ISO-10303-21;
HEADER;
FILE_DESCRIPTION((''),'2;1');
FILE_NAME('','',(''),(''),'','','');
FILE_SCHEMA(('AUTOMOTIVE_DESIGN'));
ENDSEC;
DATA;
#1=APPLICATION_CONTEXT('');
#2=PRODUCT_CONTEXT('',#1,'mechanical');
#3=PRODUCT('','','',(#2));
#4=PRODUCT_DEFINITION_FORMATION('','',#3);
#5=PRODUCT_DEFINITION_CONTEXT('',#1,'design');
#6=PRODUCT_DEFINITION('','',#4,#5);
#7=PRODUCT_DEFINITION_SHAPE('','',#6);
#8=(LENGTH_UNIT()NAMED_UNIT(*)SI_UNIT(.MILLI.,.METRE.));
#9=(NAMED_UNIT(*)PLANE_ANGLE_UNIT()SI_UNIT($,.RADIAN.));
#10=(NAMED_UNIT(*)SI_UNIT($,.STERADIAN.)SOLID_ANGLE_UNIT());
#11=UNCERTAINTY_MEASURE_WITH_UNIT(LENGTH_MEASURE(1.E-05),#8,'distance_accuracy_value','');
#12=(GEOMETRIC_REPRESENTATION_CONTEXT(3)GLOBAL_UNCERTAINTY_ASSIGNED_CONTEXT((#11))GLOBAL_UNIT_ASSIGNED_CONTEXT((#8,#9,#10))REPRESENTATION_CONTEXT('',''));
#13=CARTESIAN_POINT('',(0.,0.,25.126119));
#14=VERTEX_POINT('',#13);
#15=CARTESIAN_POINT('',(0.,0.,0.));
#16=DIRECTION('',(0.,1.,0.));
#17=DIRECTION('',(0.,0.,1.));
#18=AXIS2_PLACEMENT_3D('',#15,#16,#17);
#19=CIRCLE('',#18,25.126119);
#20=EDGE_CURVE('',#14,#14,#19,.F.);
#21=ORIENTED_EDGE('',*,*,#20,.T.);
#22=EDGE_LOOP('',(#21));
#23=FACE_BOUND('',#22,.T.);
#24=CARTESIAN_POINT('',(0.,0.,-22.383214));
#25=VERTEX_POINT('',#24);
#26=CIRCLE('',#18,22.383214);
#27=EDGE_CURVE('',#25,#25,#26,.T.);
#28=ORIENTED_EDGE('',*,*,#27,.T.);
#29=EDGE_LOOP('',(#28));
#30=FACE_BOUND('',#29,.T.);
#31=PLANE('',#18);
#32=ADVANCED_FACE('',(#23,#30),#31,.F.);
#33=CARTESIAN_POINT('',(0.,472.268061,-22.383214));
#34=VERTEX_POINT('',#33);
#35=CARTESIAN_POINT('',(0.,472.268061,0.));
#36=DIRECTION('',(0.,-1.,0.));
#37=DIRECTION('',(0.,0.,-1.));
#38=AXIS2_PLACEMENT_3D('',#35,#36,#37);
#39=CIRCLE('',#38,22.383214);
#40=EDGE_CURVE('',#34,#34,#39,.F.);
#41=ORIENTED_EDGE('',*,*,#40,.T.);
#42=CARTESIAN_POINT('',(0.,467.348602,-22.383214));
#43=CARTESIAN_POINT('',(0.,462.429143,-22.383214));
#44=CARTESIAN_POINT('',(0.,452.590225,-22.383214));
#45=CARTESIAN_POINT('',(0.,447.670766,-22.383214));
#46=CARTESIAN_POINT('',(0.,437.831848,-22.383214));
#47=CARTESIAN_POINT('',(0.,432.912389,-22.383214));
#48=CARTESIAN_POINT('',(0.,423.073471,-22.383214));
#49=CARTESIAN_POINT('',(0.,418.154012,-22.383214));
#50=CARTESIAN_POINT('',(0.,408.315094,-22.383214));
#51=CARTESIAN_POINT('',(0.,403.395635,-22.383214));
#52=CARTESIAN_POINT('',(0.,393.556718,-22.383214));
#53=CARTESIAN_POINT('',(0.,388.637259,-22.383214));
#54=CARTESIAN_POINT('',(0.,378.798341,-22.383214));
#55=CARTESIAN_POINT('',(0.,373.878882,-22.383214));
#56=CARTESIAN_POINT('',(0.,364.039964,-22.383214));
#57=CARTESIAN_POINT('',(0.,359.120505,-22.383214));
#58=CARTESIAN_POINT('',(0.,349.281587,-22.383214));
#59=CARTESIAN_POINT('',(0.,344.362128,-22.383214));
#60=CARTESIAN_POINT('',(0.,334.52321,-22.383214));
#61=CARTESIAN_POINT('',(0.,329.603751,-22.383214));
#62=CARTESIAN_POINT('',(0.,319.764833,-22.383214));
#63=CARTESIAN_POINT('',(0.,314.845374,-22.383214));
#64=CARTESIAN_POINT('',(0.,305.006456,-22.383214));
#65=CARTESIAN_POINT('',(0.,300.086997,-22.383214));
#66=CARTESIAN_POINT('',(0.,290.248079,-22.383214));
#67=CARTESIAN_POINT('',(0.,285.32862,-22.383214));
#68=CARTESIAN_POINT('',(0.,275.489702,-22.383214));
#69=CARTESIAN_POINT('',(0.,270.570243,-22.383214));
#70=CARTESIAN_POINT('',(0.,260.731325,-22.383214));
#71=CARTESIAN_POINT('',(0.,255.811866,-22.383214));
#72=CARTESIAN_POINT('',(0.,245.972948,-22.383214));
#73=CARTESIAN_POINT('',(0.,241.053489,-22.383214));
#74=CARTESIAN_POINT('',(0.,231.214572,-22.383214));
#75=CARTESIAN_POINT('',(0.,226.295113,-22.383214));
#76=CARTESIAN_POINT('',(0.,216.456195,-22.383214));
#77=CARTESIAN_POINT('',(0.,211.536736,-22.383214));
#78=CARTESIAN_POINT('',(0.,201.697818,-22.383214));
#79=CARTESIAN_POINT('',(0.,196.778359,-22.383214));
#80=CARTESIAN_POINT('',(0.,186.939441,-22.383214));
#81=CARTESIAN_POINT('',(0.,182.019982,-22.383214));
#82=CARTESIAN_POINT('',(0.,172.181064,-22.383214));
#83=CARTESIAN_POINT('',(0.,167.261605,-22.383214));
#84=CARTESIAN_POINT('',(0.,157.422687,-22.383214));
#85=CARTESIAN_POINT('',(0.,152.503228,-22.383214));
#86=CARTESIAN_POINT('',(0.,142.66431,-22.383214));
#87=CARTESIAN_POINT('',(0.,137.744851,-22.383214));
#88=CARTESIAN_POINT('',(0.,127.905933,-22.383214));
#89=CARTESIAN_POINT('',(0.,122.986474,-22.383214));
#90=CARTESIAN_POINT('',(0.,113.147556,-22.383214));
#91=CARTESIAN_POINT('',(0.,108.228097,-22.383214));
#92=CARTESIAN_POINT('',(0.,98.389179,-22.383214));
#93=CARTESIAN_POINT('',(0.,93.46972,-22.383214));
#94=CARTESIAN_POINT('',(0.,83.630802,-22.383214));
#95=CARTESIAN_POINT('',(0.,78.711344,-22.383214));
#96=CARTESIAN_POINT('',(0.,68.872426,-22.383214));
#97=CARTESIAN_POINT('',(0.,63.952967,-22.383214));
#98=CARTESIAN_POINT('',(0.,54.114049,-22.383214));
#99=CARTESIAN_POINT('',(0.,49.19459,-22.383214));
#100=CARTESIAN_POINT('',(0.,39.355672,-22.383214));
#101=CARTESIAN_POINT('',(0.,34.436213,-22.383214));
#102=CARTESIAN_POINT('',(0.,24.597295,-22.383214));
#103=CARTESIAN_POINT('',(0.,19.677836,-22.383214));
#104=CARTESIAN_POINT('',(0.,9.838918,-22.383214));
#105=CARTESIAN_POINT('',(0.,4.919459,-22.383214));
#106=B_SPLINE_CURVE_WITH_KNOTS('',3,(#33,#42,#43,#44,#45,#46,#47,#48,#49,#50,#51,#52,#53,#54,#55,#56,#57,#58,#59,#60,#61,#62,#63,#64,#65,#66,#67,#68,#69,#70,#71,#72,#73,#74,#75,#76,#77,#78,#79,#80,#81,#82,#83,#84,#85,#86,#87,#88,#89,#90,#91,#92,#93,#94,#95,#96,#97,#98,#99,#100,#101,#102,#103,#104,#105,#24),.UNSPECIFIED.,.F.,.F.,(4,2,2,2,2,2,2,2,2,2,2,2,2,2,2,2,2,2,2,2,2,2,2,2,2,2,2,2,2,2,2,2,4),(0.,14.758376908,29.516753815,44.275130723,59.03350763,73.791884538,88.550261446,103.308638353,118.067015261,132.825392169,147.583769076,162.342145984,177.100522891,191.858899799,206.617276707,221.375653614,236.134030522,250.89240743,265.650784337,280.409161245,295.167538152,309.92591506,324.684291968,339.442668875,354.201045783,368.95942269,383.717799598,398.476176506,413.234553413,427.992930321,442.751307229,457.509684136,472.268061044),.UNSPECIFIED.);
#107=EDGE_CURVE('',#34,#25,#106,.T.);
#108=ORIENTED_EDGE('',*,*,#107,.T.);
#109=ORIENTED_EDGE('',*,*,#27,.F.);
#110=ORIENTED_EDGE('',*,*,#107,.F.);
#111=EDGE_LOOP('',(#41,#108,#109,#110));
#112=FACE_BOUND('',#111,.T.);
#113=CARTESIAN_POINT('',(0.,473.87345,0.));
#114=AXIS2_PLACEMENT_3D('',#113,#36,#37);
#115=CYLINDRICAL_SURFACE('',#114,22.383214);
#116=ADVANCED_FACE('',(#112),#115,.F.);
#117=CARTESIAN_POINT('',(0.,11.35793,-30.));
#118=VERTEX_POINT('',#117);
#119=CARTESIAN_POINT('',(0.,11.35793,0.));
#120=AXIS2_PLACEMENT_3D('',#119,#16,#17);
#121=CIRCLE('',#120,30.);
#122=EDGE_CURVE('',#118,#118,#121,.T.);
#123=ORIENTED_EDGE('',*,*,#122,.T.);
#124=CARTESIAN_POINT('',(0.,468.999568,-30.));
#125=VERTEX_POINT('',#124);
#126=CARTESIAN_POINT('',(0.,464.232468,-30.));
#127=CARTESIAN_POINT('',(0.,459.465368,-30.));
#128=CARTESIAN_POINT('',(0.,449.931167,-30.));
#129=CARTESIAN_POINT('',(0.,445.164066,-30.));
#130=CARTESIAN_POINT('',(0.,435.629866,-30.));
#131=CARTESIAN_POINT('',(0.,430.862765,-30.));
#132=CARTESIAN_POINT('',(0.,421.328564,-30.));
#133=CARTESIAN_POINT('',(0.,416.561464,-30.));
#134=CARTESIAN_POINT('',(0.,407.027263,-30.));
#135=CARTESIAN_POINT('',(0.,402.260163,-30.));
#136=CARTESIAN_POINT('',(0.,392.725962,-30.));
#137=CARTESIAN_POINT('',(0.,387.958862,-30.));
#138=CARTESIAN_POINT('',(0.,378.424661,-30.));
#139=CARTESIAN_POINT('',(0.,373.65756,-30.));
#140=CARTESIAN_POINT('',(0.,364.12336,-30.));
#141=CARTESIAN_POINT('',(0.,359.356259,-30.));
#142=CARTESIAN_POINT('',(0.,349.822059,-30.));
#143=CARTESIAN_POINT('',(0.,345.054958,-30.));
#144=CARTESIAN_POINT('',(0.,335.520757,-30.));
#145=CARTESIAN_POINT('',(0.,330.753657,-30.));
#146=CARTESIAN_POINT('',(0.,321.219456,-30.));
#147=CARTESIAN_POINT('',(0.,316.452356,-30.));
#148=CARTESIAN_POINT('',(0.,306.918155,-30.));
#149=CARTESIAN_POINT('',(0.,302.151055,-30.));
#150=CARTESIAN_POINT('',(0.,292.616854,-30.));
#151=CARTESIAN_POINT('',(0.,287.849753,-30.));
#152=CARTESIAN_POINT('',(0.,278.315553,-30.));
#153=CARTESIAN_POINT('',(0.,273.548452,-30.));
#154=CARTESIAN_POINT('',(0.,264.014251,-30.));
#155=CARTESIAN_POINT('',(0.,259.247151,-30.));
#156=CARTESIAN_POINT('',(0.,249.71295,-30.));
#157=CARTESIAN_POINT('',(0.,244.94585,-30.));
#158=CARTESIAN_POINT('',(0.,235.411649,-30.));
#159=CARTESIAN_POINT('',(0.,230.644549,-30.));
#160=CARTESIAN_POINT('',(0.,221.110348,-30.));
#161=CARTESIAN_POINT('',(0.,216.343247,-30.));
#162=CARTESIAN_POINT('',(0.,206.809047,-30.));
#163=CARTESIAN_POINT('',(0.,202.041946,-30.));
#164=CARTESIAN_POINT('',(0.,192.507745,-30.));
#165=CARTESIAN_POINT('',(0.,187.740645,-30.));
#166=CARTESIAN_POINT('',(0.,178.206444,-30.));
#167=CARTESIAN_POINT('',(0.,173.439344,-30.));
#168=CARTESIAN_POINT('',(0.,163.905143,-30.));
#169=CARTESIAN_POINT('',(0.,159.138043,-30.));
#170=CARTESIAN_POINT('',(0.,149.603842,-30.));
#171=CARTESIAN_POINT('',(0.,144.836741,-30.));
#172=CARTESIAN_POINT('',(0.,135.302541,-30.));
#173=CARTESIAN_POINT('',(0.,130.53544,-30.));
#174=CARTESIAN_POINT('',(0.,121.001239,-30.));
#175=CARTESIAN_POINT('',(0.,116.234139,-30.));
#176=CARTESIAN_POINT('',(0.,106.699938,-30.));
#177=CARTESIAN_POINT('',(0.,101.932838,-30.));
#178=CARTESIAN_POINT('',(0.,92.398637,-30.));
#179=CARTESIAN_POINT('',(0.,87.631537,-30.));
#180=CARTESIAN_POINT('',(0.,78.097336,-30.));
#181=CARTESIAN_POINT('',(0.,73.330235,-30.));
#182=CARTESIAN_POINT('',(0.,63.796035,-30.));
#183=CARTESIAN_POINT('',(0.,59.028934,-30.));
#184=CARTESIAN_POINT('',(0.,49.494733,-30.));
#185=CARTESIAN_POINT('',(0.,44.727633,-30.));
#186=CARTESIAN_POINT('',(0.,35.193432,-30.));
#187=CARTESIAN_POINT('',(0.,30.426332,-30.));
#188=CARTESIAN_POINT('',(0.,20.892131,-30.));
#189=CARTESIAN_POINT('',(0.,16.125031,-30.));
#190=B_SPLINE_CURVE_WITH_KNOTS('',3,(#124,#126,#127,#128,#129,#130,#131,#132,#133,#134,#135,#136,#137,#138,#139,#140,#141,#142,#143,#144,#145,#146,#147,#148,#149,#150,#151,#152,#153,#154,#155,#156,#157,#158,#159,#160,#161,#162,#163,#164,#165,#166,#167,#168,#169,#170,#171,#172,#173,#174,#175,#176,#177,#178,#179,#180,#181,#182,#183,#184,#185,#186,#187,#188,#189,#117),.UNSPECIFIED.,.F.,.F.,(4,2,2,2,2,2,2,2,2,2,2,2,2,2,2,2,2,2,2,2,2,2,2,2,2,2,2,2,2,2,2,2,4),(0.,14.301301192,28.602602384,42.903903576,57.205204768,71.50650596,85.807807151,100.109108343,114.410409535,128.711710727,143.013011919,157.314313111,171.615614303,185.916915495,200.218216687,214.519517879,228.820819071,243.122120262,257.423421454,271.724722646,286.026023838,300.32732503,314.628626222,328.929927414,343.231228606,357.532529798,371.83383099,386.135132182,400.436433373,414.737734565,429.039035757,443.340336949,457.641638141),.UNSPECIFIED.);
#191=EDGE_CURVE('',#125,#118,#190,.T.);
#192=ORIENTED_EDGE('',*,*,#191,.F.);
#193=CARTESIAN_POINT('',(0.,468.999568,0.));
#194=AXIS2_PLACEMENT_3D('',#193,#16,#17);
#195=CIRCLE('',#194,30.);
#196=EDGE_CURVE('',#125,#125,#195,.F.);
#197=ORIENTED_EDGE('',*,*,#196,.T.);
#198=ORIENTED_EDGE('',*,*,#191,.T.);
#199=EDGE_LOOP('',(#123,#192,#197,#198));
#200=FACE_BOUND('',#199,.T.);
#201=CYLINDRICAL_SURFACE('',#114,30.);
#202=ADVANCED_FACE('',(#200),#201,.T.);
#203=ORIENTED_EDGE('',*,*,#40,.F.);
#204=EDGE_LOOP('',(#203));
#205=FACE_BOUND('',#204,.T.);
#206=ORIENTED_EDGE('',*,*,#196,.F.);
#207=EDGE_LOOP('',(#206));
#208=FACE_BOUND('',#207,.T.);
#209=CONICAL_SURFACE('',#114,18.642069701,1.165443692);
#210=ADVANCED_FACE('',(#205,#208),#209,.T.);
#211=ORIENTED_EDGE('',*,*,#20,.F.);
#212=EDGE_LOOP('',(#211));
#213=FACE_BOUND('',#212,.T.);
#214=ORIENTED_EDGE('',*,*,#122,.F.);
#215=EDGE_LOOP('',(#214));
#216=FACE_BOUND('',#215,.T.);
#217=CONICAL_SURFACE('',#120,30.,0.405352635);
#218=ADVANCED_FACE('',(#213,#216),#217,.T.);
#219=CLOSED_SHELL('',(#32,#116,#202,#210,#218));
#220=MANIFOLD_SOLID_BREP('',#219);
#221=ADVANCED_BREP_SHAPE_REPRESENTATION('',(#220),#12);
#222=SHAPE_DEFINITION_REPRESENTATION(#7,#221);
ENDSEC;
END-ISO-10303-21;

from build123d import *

# Parameters (mm, degrees)
SKETCH1_R           = 30
BOSS_EXTRUDE1_DEPTH = 473.87345
SKETCH2_R           = 22.383213975
CUT_EXTRUDE1_DEPTH  = 476.768900428
CHAMFER1_SIZE       = 4.873881
CHAMFER1_SIZE_2     = 11.35793


with BuildPart() as part:
    # Sketch1 → Boss-Extrude1 (new body)
    with BuildSketch(Plane(origin=(0, 0, 0), x_dir=(1, 0, 0), z_dir=(0, 1, 0))):
        with Locations(Location((0, 0, 0), (0, 0, 90))):
            Circle(SKETCH1_R)
    extrude(amount=BOSS_EXTRUDE1_DEPTH)

    # Sketch2 → Cut-Extrude1 (cut, through all)
    with BuildSketch(Plane(origin=(0, 0, 0), x_dir=(1, 0, 0), z_dir=(0, 1, 0))):
        with Locations(Location((0, 0, 0), (0, 0, 90))):
            Circle(SKETCH2_R)
    extrude(amount=CUT_EXTRUDE1_DEPTH, mode=Mode.SUBTRACT)

    # Chamfer1
    # the kernel refuses this chamfer: 11.35793, 4.873881 mm, written as the material it takes off along each edge
    with BuildSketch(Plane(origin=(0, 473.87345, 0), x_dir=(0, 0, -1), z_dir=(1, 0, 0))) as chamfer1_piece_1:
        Polygon((30, -CHAMFER1_SIZE), (30 - CHAMFER1_SIZE_2, 0), (30, 0), align=None)
    revolve(axis=Axis((0, 473.87345, 0), (0, 1, 0)), mode=Mode.SUBTRACT)
    with BuildSketch(Plane(origin=(0, 0, 0), x_dir=(0, 0, -1), z_dir=(1, 0, 0))) as chamfer1_piece_2:
        Polygon((30, CHAMFER1_SIZE_2), (30 - CHAMFER1_SIZE, 0), (30, 0), align=None)
    revolve(axis=Axis((0, 0, 0), (0, 1, 0)), mode=Mode.SUBTRACT)


solid = part.part
